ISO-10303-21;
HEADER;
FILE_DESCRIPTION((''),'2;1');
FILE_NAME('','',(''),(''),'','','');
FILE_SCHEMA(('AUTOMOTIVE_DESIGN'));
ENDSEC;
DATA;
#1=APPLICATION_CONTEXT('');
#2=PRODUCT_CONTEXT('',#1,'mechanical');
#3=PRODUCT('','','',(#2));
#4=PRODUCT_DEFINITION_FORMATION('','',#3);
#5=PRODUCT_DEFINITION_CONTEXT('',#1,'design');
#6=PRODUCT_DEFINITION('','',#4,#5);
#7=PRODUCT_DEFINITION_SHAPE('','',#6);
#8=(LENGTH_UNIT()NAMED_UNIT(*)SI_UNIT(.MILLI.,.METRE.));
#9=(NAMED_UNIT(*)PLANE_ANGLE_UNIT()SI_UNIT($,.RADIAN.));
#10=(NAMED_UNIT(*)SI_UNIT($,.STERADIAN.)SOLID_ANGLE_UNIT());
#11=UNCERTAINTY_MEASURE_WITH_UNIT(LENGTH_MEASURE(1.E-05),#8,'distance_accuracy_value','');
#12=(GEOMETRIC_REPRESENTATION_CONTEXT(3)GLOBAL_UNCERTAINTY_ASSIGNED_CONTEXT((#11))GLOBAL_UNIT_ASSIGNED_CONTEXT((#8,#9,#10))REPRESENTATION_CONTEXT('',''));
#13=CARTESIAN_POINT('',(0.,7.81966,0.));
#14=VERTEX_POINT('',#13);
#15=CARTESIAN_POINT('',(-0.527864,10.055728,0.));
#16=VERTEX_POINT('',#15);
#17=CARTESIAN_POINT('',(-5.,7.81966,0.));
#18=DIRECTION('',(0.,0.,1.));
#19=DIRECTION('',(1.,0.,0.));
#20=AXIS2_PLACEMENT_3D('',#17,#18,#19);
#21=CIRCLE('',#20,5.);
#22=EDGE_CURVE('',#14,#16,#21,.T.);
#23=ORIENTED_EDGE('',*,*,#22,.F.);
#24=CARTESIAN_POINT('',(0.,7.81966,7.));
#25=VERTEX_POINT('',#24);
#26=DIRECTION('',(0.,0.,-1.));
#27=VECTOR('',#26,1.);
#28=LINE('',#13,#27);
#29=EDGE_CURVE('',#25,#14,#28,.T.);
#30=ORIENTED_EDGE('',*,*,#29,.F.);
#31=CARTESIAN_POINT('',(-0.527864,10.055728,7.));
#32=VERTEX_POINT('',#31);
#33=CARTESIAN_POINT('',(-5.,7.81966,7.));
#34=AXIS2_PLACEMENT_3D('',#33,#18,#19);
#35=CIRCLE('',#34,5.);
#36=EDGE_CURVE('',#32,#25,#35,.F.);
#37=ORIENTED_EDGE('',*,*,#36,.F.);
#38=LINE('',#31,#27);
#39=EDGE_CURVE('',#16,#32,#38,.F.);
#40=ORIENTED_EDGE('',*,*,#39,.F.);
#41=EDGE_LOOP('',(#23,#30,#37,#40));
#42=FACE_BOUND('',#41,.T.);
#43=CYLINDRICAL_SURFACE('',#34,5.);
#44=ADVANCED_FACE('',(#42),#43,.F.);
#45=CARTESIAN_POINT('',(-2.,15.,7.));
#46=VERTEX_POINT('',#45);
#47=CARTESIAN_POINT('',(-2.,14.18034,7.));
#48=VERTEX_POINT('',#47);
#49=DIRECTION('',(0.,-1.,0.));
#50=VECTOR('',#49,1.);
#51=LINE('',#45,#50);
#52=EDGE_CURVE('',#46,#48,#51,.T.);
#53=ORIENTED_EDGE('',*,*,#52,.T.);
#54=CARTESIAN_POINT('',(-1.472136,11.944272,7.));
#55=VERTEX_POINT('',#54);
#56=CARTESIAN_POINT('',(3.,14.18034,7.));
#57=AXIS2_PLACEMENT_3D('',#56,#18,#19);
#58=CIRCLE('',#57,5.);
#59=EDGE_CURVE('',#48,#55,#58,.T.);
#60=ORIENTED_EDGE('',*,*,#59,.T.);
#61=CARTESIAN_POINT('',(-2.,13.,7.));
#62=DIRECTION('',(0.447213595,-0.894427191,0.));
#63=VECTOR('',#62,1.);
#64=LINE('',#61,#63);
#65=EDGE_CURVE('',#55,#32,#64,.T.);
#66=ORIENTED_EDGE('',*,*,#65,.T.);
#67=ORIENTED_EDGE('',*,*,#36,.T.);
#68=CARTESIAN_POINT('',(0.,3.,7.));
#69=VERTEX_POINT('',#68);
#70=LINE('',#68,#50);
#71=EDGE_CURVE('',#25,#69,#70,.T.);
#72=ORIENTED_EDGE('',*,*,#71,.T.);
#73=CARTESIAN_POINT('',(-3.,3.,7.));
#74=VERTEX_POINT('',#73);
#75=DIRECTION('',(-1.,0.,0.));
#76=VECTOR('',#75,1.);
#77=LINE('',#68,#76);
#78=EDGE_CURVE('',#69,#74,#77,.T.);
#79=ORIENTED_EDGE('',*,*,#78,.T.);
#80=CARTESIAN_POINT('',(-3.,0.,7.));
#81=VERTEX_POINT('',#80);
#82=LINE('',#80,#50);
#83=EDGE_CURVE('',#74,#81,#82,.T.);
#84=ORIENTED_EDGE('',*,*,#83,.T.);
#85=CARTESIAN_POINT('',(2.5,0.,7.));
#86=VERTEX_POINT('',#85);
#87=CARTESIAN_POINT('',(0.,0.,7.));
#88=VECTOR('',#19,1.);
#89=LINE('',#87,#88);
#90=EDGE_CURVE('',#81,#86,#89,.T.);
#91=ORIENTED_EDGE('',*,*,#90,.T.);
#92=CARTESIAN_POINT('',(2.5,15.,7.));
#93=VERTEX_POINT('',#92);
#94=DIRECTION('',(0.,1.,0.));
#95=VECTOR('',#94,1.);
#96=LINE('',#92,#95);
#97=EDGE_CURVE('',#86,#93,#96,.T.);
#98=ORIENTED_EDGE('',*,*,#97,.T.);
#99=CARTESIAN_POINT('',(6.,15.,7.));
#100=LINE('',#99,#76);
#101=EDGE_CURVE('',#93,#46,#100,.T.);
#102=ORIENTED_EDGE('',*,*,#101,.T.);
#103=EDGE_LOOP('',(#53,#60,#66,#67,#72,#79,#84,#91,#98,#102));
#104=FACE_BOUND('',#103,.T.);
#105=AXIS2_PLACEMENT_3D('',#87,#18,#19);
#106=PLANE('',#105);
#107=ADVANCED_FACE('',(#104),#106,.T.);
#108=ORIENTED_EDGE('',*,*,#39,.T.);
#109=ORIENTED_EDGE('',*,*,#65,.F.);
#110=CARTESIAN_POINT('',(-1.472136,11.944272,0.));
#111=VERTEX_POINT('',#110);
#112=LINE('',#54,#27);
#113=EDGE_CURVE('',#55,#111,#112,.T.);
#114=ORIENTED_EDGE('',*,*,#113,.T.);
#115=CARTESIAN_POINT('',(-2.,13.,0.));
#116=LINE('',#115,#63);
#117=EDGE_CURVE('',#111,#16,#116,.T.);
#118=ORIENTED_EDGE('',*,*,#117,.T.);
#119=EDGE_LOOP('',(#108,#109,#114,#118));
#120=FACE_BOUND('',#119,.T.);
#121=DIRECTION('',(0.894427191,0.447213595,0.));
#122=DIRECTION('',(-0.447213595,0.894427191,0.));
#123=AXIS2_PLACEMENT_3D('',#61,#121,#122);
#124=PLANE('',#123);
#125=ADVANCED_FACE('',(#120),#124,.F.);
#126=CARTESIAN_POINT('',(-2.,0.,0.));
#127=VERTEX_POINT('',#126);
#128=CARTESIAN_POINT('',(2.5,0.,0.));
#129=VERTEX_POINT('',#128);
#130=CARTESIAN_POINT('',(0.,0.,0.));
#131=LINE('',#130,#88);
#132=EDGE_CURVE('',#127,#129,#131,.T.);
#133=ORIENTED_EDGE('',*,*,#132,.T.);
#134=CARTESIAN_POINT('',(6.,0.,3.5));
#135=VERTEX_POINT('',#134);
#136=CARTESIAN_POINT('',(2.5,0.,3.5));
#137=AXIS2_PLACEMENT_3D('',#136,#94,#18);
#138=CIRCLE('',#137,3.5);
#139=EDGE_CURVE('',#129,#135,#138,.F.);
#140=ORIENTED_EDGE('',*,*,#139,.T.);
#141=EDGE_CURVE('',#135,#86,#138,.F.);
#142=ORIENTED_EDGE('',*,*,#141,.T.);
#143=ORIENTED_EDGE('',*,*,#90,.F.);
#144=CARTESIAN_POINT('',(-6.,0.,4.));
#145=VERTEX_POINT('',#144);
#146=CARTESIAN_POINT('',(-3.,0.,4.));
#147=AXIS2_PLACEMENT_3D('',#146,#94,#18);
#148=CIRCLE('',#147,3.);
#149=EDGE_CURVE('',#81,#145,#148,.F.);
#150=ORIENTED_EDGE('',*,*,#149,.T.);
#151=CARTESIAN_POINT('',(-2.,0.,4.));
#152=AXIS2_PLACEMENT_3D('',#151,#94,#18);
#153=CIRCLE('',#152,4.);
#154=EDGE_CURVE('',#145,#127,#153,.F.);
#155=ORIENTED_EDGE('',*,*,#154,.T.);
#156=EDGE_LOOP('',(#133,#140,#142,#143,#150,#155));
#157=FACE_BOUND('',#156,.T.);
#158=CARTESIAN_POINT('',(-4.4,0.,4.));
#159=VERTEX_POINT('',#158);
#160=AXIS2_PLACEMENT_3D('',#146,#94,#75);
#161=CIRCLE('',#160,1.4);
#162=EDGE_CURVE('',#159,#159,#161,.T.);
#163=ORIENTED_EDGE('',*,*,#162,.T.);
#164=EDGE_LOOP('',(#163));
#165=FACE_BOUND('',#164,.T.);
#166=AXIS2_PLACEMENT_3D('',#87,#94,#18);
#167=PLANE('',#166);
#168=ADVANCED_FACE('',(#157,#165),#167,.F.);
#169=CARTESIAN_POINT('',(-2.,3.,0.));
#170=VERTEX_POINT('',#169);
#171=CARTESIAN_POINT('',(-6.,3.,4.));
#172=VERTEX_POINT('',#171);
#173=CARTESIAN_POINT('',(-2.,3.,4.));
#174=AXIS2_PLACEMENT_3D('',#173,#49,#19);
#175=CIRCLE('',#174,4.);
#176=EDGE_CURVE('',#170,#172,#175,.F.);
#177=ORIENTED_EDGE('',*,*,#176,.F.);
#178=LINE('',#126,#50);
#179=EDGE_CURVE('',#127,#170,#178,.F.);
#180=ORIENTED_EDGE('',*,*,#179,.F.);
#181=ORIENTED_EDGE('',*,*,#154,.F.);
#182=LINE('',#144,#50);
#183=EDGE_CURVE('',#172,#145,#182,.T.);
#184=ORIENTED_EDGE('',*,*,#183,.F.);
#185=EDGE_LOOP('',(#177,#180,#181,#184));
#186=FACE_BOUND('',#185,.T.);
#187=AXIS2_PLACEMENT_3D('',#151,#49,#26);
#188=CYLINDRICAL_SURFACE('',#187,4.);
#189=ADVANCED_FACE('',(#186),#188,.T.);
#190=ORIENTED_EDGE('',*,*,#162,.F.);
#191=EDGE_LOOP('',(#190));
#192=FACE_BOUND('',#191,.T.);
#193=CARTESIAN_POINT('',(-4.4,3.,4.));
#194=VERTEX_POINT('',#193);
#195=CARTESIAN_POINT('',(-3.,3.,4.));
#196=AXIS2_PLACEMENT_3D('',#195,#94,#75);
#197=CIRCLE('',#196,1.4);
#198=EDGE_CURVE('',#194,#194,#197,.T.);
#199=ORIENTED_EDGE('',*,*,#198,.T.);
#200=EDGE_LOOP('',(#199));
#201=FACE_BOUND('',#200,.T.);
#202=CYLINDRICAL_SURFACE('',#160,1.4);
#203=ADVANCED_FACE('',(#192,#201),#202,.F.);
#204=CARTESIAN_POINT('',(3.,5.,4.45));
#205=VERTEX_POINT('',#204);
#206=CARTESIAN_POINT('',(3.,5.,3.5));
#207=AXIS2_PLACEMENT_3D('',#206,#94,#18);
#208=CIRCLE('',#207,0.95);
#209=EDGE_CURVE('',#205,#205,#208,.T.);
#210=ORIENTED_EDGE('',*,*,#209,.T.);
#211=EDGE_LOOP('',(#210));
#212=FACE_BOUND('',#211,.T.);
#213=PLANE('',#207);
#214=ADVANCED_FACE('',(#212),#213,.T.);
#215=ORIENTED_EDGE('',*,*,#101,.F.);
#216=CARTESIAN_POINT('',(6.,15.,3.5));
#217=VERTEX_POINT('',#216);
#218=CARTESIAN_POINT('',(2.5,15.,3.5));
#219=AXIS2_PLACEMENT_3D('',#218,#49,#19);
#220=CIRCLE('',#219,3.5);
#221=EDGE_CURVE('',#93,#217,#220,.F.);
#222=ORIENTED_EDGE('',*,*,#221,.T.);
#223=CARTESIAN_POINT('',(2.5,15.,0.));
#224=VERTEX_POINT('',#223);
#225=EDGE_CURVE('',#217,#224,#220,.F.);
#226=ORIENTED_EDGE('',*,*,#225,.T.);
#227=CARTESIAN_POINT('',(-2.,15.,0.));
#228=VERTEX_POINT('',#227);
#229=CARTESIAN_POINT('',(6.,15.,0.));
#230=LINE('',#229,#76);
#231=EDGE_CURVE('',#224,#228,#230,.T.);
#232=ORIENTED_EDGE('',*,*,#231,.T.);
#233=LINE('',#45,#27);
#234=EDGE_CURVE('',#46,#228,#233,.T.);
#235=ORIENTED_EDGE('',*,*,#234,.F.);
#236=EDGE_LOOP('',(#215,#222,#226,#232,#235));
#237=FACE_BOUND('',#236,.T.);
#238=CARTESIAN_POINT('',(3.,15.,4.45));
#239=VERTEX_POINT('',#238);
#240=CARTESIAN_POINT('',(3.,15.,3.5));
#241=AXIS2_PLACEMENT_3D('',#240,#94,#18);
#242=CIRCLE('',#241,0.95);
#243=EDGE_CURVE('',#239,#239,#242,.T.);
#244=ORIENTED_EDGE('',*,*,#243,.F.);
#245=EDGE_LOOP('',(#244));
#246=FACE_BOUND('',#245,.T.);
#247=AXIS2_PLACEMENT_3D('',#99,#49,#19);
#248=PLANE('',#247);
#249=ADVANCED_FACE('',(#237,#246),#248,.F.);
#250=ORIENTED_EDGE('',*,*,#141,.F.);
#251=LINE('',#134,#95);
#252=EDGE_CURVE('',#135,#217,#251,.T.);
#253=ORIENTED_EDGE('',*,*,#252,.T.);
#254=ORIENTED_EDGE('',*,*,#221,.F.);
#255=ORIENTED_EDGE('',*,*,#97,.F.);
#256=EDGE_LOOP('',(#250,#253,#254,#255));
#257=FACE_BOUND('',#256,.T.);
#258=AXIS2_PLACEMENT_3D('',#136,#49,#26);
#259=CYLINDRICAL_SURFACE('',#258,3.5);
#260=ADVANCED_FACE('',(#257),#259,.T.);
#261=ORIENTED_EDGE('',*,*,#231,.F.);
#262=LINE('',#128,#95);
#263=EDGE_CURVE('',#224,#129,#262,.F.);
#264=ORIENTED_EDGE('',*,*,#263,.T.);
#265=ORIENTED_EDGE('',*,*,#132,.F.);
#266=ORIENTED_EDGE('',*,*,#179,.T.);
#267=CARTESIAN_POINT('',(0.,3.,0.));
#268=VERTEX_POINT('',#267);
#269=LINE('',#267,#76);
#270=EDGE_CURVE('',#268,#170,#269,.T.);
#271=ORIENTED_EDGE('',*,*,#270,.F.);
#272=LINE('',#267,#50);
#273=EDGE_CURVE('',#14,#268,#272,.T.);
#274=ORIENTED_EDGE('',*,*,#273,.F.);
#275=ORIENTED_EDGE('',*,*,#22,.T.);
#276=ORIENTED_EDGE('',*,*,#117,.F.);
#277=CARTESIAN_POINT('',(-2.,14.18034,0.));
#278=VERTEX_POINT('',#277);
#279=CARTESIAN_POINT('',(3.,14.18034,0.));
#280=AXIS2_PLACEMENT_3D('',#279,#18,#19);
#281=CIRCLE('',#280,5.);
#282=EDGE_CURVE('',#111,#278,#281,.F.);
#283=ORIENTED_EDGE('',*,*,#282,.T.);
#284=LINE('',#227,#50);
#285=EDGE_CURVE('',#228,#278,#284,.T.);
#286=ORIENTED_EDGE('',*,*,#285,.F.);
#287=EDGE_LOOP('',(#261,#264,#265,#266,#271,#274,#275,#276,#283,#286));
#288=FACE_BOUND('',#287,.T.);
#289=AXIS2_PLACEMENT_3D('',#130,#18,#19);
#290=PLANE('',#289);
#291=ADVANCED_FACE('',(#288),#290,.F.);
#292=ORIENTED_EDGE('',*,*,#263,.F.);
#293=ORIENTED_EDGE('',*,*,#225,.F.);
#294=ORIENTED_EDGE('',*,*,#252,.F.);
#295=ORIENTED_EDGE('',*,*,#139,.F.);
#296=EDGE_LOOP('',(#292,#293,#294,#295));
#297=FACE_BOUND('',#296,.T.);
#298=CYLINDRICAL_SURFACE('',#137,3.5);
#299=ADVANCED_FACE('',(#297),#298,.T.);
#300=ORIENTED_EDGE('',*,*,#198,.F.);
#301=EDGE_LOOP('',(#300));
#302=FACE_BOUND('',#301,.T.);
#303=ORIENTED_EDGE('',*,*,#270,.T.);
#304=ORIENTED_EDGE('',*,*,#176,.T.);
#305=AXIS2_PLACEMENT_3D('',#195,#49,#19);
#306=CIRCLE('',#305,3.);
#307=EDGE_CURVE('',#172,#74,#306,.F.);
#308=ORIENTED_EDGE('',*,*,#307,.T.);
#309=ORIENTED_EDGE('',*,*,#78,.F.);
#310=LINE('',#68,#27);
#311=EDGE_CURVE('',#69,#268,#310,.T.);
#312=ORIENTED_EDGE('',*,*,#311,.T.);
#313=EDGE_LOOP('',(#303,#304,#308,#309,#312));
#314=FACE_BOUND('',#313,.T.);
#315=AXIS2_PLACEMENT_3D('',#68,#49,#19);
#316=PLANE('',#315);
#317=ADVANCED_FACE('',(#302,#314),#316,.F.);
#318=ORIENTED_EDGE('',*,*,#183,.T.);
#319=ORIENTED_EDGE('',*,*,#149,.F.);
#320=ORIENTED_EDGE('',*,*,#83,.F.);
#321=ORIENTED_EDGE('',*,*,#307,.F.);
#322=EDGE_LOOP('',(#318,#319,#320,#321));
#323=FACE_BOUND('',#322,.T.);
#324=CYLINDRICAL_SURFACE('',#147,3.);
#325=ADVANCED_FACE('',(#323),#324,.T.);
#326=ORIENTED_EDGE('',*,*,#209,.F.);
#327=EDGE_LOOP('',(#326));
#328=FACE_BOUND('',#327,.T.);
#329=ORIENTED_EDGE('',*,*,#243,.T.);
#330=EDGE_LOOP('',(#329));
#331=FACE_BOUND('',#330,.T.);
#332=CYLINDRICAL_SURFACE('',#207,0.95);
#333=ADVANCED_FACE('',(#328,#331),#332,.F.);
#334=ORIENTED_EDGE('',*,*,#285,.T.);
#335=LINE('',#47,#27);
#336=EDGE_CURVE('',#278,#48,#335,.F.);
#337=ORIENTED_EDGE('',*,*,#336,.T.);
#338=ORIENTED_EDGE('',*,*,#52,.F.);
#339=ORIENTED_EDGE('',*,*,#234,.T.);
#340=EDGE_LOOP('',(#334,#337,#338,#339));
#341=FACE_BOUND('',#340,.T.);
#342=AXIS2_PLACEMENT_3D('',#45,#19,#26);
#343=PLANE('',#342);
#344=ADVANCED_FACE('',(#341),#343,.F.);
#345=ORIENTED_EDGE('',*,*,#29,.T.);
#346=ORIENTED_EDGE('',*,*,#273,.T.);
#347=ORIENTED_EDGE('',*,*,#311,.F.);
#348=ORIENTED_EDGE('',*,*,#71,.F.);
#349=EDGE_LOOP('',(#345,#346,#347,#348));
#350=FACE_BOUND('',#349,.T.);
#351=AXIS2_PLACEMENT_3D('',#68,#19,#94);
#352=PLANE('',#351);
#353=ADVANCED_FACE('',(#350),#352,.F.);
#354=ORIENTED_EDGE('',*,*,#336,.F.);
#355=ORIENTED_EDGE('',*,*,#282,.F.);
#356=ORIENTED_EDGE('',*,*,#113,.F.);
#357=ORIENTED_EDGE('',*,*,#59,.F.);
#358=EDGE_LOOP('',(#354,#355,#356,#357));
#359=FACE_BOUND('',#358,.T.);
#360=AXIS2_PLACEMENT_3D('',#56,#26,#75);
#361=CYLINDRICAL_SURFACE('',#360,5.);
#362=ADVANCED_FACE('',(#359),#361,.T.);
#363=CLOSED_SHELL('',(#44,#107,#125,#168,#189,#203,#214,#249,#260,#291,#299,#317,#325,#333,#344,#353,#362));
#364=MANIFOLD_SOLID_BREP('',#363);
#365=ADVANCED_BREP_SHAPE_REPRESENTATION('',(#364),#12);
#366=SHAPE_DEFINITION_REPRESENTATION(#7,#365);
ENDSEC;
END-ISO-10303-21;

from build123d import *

# Parameters (mm, degrees)
BOSS_EXTRU_1_DEPTH      = 7
ESQUISSE2_R             = 1.4
ENL_V_MAT_EXTRU_1_DEPTH = 16.13274595
ESQUISSE3_R             = 0.95
ENL_V_MAT_EXTRU_2_DEPTH = 10
CONG_1_R                = 4
CONG_2_R                = 3
CONG_3_R                = 3.5
CONG_4_R                = 5


with BuildPart() as part:
    # Esquisse1 → Boss.-Extru.1 (new body)
    with BuildSketch(Plane.XY):
        Polygon((-2, 13), (0, 9), (0, 3), (-6, 3), (-6, 0), (0, 0), (6, 0), (6, 15), (-2, 15), align=None)
    extrude(amount=BOSS_EXTRU_1_DEPTH)

    # Esquisse2 → Enlèv. mat.-Extru.1 (cut, through all)
    with BuildSketch(Plane(origin=(0, 3, 0), x_dir=(1, 0, 0), z_dir=(0, 1, 0))):
        with Locations(Location((-3, -4, 0), (0, 0, 180))):
            Circle(ESQUISSE2_R)
    extrude(amount=-ENL_V_MAT_EXTRU_1_DEPTH, mode=Mode.SUBTRACT)

    # Esquisse3 → Enlèv. mat.-Extru.2 (cut)
    with BuildSketch(Plane(origin=(0, 15, 0), x_dir=(1, 0, 0), z_dir=(0, 1, 0))):
        with Locations(Location((3, -3.5, 0), (0, 0, 270))):
            Circle(ESQUISSE3_R)
    extrude(amount=-ENL_V_MAT_EXTRU_2_DEPTH, mode=Mode.SUBTRACT)

    # Congé1
    cong_1_edges = [part.edges().sort_by_distance(p)[0] for p in [
        (-6, 1.5, 0),
    ]]
    fillet(cong_1_edges, radius=CONG_1_R)

    # Congé2
    cong_2_edges = [part.edges().sort_by_distance(p)[0] for p in [
        (-6, 1.5, 7),
    ]]
    fillet(cong_2_edges, radius=CONG_2_R - 0.0001)  # a hair under: the kernel refuses the full size

    # Congé3
    cong_3_edges = [part.edges().sort_by_distance(p)[0] for p in [
        (6, 7.5, 7),
        (6, 7.5, 0),
    ]]
    fillet(cong_3_edges, radius=CONG_3_R - 0.0001)  # a hair under: the kernel refuses the full size

    # Congé4
    cong_4_edges = [part.edges().sort_by_distance(p)[0] for p in [
        (0, 9, 3.5),
        (-2, 13, 3.5),
    ]]
    fillet(cong_4_edges, radius=CONG_4_R)


solid = part.part
